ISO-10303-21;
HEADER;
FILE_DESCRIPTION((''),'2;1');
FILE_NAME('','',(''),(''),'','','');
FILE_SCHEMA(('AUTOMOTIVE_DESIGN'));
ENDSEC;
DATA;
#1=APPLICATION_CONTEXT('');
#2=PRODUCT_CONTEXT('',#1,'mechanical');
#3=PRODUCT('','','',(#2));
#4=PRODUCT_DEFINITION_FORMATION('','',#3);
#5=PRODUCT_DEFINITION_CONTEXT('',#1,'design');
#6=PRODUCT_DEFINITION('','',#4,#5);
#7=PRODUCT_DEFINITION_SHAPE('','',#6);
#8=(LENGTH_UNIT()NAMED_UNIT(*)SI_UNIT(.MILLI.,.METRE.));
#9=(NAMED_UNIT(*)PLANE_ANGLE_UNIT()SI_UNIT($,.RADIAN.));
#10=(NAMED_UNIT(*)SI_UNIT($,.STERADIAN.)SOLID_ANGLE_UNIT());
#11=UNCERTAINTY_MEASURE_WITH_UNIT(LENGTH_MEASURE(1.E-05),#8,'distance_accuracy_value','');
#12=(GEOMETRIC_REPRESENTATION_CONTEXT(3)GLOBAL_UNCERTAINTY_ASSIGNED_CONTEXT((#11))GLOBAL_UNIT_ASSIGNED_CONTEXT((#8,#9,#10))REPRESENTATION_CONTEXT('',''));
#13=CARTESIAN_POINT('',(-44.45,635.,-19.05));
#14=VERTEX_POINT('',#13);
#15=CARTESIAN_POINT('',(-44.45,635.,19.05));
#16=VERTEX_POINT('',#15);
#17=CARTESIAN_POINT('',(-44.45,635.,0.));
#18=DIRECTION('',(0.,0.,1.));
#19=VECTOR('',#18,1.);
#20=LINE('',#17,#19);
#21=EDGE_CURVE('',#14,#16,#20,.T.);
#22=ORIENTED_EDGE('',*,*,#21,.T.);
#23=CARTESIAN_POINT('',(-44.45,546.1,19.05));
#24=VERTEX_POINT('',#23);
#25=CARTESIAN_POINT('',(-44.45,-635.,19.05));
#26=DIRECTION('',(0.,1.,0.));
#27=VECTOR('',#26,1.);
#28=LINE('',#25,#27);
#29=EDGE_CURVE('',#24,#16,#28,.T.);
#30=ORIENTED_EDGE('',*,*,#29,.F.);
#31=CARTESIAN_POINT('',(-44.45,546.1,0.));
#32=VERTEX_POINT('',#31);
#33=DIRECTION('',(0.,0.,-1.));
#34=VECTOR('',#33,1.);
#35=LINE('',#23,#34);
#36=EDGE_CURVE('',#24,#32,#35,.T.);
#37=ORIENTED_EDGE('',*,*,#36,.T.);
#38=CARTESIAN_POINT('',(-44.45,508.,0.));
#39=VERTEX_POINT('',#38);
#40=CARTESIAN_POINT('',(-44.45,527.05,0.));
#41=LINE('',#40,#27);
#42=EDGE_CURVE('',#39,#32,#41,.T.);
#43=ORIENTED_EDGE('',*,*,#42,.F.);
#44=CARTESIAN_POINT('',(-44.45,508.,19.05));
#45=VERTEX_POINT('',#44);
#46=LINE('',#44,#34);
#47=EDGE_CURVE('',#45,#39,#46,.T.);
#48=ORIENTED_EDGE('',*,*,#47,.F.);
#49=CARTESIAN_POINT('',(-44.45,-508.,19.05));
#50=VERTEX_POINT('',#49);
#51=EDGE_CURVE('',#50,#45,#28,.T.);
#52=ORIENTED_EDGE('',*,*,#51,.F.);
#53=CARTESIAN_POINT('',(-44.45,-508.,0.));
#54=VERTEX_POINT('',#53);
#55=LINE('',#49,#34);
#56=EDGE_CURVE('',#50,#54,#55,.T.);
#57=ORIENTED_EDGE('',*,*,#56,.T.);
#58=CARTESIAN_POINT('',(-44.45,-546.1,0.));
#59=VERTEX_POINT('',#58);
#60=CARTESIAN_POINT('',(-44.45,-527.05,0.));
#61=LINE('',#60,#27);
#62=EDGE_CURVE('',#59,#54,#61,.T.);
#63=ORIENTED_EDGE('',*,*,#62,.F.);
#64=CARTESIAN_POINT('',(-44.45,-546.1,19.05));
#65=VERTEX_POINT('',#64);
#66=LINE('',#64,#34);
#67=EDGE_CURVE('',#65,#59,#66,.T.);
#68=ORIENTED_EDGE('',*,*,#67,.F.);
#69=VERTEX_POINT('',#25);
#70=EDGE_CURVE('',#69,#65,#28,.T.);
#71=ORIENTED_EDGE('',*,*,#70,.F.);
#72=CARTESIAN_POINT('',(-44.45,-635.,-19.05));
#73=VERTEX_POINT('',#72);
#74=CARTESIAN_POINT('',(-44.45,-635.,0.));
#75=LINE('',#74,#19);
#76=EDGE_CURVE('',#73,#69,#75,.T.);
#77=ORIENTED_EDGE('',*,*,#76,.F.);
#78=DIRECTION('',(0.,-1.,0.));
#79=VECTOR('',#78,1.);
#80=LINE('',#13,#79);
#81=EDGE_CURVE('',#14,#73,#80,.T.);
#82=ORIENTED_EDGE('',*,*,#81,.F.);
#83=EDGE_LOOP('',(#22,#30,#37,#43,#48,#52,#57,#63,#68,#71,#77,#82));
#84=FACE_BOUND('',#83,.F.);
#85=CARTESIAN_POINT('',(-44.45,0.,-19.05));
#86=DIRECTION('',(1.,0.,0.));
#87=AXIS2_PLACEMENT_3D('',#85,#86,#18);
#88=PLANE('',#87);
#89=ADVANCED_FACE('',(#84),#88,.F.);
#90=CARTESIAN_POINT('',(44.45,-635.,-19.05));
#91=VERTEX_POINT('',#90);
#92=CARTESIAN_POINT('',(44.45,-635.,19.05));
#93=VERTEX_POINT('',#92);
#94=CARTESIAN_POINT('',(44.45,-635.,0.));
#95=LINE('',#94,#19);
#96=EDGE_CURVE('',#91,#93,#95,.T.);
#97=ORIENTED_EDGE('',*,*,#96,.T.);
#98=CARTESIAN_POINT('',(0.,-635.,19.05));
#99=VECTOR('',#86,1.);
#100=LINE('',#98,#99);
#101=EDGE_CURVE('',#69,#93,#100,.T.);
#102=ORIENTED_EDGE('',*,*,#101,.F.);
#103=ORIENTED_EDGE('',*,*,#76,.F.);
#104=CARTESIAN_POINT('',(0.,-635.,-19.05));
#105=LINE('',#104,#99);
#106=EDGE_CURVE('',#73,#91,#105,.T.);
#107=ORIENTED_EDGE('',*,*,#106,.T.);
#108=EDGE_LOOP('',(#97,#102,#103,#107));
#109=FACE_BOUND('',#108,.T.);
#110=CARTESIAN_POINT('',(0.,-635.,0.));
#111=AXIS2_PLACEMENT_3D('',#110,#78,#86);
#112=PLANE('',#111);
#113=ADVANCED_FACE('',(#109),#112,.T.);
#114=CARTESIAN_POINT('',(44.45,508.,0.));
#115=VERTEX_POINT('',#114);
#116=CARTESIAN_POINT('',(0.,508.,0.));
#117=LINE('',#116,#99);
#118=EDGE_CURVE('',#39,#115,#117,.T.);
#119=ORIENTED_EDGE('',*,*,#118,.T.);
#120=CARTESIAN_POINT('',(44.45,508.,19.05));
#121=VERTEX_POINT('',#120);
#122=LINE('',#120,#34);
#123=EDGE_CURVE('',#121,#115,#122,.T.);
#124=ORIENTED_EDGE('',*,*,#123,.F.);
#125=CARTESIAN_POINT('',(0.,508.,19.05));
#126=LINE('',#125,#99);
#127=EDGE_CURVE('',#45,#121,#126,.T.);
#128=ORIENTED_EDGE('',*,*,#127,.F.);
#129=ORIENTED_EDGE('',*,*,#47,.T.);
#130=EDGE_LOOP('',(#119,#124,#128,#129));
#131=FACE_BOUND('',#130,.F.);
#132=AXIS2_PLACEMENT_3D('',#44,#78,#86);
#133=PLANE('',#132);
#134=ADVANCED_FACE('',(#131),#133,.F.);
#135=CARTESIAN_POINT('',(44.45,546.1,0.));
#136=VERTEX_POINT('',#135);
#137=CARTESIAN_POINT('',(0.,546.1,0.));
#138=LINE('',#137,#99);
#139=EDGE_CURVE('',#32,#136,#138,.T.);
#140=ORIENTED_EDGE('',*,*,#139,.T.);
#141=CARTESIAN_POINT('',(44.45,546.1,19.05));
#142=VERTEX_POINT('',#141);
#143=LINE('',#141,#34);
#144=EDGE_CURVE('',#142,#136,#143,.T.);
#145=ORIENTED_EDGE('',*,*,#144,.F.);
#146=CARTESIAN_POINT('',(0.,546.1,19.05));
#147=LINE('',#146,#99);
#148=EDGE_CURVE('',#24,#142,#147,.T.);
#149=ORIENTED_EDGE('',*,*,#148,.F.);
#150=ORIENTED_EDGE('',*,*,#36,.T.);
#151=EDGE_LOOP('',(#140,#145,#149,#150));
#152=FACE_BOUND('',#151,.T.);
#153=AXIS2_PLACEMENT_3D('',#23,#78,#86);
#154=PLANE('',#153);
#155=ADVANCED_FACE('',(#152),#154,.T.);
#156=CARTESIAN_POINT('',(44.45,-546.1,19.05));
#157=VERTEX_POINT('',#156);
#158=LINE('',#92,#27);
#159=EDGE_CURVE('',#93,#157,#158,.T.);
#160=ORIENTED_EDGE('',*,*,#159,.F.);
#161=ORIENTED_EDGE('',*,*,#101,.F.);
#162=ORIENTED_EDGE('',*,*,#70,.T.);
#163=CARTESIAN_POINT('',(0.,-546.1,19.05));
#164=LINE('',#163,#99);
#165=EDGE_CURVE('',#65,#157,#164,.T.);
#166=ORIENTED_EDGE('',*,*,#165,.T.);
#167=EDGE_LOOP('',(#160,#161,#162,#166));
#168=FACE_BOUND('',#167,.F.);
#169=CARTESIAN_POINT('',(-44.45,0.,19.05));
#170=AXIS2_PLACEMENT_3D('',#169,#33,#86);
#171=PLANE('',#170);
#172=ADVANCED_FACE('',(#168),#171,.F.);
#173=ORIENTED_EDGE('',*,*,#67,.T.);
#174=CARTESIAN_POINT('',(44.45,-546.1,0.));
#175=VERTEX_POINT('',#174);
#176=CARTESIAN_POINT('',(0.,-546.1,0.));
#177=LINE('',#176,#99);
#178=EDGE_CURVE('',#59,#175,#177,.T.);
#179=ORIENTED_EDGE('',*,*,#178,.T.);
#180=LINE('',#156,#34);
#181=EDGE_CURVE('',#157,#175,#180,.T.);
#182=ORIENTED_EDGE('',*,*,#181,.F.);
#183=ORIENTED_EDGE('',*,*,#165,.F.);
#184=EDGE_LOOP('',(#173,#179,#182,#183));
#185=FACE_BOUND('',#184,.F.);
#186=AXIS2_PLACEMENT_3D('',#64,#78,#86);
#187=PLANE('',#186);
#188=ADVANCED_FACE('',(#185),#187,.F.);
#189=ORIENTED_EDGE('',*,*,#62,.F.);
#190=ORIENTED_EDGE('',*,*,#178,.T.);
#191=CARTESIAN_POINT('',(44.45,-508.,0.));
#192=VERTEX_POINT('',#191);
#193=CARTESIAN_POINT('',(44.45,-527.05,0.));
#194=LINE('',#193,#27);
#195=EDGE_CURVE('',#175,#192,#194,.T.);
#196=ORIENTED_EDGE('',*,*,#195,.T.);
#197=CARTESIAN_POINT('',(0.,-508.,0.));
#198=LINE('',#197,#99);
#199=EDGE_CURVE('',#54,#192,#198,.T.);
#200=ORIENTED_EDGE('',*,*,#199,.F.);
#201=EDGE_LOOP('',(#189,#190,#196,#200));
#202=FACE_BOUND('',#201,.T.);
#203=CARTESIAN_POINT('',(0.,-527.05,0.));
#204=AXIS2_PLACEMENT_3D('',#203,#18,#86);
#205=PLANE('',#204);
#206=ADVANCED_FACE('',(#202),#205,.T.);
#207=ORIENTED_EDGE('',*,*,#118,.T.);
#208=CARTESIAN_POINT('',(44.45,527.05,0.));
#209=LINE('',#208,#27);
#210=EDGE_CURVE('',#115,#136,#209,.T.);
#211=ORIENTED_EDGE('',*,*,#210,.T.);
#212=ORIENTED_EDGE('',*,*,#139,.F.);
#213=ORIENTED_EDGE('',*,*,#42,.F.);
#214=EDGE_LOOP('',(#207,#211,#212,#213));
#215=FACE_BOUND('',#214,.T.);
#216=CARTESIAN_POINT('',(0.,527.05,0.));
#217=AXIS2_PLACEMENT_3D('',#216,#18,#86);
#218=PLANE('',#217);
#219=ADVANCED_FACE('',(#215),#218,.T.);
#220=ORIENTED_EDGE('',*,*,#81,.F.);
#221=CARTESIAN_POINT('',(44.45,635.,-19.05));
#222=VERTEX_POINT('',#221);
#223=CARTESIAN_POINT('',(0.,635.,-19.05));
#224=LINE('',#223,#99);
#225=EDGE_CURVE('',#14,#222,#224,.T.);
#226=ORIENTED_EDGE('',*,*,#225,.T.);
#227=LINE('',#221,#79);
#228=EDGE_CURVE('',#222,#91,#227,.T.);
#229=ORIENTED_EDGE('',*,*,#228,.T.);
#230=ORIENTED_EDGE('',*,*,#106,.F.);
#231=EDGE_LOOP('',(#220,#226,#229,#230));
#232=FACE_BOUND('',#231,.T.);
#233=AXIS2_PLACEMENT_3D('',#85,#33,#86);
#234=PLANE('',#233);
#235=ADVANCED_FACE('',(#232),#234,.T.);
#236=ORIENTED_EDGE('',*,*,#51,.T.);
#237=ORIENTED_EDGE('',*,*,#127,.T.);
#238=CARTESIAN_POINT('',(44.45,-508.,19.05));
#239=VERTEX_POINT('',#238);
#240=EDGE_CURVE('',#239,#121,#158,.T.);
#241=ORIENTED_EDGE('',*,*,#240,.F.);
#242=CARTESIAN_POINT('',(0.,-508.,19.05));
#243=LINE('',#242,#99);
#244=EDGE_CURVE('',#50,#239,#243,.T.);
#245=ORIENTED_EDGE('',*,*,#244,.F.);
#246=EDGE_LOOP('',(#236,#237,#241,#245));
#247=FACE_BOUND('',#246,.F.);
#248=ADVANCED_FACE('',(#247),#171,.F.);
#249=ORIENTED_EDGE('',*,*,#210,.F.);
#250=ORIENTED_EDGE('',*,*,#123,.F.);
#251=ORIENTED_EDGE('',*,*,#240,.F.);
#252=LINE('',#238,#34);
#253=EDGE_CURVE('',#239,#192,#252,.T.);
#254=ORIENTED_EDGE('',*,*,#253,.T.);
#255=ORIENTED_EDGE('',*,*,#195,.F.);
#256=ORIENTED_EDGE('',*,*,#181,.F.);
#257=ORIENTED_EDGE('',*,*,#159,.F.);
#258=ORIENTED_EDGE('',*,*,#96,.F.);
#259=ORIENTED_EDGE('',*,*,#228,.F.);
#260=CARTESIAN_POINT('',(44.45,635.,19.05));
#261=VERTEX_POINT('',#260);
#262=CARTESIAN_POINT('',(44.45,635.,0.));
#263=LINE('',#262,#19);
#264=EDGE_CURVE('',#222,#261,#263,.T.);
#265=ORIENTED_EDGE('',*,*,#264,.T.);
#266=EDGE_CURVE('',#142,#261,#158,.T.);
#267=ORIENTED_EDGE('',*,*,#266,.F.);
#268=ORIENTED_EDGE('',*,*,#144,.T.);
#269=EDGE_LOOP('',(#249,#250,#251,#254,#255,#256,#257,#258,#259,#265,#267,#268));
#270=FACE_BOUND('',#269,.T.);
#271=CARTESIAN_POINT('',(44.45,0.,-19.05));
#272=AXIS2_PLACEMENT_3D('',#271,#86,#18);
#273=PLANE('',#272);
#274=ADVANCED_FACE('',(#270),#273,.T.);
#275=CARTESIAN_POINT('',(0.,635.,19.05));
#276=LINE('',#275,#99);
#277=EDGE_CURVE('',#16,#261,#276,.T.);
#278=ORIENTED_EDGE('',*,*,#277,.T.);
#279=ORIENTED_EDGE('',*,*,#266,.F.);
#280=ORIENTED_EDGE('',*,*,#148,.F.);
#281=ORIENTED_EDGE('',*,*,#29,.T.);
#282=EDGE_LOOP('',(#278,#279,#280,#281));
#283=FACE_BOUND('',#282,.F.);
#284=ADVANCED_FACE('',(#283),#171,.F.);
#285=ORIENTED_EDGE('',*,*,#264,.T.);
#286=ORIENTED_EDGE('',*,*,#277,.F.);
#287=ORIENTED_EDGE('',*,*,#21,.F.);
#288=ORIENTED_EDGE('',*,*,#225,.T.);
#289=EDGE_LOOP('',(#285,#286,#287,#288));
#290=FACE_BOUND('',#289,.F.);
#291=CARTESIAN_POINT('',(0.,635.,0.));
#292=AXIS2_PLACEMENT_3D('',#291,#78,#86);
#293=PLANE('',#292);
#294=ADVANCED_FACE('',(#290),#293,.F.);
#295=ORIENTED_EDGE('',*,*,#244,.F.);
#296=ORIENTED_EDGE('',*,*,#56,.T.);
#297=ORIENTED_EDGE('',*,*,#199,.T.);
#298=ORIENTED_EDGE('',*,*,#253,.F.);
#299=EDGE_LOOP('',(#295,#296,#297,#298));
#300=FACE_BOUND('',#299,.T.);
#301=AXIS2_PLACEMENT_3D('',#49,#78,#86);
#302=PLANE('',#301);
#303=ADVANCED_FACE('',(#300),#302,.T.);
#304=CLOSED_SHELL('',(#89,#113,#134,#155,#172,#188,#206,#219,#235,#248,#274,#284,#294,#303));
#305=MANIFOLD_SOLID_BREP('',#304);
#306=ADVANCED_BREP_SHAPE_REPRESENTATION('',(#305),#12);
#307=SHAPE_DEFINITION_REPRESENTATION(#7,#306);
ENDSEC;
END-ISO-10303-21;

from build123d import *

# Parameters (mm, degrees)
F0_W     = 88.9
F0_H     = 38.1
F1_DEPTH = 635
F2_W     = 88.9
F2_H     = 38.1
F3_DEPTH = 19.05


# Not quite as in the source:
# - a length typed as a fraction of an inch, garbled in the dataset ("3 / 203.2 mm" for 3/8 in), is restored


with BuildPart() as f1:
    # F0 (on Front) → F1 (new body, symmetric)
    with BuildSketch(Plane.XZ):
        Rectangle(F0_W, F0_H)
    extrude(amount=F1_DEPTH, both=True)

    # F2 (on face) → F3 (cut)
    with BuildSketch(Plane.XY.offset(19.05)):
        with Locations((0, 527.05)):
            Rectangle(F2_W, F2_H)
        with Locations((0, -527.05)):
            Rectangle(F2_W, F2_H)
    extrude(amount=-F3_DEPTH, mode=Mode.SUBTRACT)


solid = f1.part
